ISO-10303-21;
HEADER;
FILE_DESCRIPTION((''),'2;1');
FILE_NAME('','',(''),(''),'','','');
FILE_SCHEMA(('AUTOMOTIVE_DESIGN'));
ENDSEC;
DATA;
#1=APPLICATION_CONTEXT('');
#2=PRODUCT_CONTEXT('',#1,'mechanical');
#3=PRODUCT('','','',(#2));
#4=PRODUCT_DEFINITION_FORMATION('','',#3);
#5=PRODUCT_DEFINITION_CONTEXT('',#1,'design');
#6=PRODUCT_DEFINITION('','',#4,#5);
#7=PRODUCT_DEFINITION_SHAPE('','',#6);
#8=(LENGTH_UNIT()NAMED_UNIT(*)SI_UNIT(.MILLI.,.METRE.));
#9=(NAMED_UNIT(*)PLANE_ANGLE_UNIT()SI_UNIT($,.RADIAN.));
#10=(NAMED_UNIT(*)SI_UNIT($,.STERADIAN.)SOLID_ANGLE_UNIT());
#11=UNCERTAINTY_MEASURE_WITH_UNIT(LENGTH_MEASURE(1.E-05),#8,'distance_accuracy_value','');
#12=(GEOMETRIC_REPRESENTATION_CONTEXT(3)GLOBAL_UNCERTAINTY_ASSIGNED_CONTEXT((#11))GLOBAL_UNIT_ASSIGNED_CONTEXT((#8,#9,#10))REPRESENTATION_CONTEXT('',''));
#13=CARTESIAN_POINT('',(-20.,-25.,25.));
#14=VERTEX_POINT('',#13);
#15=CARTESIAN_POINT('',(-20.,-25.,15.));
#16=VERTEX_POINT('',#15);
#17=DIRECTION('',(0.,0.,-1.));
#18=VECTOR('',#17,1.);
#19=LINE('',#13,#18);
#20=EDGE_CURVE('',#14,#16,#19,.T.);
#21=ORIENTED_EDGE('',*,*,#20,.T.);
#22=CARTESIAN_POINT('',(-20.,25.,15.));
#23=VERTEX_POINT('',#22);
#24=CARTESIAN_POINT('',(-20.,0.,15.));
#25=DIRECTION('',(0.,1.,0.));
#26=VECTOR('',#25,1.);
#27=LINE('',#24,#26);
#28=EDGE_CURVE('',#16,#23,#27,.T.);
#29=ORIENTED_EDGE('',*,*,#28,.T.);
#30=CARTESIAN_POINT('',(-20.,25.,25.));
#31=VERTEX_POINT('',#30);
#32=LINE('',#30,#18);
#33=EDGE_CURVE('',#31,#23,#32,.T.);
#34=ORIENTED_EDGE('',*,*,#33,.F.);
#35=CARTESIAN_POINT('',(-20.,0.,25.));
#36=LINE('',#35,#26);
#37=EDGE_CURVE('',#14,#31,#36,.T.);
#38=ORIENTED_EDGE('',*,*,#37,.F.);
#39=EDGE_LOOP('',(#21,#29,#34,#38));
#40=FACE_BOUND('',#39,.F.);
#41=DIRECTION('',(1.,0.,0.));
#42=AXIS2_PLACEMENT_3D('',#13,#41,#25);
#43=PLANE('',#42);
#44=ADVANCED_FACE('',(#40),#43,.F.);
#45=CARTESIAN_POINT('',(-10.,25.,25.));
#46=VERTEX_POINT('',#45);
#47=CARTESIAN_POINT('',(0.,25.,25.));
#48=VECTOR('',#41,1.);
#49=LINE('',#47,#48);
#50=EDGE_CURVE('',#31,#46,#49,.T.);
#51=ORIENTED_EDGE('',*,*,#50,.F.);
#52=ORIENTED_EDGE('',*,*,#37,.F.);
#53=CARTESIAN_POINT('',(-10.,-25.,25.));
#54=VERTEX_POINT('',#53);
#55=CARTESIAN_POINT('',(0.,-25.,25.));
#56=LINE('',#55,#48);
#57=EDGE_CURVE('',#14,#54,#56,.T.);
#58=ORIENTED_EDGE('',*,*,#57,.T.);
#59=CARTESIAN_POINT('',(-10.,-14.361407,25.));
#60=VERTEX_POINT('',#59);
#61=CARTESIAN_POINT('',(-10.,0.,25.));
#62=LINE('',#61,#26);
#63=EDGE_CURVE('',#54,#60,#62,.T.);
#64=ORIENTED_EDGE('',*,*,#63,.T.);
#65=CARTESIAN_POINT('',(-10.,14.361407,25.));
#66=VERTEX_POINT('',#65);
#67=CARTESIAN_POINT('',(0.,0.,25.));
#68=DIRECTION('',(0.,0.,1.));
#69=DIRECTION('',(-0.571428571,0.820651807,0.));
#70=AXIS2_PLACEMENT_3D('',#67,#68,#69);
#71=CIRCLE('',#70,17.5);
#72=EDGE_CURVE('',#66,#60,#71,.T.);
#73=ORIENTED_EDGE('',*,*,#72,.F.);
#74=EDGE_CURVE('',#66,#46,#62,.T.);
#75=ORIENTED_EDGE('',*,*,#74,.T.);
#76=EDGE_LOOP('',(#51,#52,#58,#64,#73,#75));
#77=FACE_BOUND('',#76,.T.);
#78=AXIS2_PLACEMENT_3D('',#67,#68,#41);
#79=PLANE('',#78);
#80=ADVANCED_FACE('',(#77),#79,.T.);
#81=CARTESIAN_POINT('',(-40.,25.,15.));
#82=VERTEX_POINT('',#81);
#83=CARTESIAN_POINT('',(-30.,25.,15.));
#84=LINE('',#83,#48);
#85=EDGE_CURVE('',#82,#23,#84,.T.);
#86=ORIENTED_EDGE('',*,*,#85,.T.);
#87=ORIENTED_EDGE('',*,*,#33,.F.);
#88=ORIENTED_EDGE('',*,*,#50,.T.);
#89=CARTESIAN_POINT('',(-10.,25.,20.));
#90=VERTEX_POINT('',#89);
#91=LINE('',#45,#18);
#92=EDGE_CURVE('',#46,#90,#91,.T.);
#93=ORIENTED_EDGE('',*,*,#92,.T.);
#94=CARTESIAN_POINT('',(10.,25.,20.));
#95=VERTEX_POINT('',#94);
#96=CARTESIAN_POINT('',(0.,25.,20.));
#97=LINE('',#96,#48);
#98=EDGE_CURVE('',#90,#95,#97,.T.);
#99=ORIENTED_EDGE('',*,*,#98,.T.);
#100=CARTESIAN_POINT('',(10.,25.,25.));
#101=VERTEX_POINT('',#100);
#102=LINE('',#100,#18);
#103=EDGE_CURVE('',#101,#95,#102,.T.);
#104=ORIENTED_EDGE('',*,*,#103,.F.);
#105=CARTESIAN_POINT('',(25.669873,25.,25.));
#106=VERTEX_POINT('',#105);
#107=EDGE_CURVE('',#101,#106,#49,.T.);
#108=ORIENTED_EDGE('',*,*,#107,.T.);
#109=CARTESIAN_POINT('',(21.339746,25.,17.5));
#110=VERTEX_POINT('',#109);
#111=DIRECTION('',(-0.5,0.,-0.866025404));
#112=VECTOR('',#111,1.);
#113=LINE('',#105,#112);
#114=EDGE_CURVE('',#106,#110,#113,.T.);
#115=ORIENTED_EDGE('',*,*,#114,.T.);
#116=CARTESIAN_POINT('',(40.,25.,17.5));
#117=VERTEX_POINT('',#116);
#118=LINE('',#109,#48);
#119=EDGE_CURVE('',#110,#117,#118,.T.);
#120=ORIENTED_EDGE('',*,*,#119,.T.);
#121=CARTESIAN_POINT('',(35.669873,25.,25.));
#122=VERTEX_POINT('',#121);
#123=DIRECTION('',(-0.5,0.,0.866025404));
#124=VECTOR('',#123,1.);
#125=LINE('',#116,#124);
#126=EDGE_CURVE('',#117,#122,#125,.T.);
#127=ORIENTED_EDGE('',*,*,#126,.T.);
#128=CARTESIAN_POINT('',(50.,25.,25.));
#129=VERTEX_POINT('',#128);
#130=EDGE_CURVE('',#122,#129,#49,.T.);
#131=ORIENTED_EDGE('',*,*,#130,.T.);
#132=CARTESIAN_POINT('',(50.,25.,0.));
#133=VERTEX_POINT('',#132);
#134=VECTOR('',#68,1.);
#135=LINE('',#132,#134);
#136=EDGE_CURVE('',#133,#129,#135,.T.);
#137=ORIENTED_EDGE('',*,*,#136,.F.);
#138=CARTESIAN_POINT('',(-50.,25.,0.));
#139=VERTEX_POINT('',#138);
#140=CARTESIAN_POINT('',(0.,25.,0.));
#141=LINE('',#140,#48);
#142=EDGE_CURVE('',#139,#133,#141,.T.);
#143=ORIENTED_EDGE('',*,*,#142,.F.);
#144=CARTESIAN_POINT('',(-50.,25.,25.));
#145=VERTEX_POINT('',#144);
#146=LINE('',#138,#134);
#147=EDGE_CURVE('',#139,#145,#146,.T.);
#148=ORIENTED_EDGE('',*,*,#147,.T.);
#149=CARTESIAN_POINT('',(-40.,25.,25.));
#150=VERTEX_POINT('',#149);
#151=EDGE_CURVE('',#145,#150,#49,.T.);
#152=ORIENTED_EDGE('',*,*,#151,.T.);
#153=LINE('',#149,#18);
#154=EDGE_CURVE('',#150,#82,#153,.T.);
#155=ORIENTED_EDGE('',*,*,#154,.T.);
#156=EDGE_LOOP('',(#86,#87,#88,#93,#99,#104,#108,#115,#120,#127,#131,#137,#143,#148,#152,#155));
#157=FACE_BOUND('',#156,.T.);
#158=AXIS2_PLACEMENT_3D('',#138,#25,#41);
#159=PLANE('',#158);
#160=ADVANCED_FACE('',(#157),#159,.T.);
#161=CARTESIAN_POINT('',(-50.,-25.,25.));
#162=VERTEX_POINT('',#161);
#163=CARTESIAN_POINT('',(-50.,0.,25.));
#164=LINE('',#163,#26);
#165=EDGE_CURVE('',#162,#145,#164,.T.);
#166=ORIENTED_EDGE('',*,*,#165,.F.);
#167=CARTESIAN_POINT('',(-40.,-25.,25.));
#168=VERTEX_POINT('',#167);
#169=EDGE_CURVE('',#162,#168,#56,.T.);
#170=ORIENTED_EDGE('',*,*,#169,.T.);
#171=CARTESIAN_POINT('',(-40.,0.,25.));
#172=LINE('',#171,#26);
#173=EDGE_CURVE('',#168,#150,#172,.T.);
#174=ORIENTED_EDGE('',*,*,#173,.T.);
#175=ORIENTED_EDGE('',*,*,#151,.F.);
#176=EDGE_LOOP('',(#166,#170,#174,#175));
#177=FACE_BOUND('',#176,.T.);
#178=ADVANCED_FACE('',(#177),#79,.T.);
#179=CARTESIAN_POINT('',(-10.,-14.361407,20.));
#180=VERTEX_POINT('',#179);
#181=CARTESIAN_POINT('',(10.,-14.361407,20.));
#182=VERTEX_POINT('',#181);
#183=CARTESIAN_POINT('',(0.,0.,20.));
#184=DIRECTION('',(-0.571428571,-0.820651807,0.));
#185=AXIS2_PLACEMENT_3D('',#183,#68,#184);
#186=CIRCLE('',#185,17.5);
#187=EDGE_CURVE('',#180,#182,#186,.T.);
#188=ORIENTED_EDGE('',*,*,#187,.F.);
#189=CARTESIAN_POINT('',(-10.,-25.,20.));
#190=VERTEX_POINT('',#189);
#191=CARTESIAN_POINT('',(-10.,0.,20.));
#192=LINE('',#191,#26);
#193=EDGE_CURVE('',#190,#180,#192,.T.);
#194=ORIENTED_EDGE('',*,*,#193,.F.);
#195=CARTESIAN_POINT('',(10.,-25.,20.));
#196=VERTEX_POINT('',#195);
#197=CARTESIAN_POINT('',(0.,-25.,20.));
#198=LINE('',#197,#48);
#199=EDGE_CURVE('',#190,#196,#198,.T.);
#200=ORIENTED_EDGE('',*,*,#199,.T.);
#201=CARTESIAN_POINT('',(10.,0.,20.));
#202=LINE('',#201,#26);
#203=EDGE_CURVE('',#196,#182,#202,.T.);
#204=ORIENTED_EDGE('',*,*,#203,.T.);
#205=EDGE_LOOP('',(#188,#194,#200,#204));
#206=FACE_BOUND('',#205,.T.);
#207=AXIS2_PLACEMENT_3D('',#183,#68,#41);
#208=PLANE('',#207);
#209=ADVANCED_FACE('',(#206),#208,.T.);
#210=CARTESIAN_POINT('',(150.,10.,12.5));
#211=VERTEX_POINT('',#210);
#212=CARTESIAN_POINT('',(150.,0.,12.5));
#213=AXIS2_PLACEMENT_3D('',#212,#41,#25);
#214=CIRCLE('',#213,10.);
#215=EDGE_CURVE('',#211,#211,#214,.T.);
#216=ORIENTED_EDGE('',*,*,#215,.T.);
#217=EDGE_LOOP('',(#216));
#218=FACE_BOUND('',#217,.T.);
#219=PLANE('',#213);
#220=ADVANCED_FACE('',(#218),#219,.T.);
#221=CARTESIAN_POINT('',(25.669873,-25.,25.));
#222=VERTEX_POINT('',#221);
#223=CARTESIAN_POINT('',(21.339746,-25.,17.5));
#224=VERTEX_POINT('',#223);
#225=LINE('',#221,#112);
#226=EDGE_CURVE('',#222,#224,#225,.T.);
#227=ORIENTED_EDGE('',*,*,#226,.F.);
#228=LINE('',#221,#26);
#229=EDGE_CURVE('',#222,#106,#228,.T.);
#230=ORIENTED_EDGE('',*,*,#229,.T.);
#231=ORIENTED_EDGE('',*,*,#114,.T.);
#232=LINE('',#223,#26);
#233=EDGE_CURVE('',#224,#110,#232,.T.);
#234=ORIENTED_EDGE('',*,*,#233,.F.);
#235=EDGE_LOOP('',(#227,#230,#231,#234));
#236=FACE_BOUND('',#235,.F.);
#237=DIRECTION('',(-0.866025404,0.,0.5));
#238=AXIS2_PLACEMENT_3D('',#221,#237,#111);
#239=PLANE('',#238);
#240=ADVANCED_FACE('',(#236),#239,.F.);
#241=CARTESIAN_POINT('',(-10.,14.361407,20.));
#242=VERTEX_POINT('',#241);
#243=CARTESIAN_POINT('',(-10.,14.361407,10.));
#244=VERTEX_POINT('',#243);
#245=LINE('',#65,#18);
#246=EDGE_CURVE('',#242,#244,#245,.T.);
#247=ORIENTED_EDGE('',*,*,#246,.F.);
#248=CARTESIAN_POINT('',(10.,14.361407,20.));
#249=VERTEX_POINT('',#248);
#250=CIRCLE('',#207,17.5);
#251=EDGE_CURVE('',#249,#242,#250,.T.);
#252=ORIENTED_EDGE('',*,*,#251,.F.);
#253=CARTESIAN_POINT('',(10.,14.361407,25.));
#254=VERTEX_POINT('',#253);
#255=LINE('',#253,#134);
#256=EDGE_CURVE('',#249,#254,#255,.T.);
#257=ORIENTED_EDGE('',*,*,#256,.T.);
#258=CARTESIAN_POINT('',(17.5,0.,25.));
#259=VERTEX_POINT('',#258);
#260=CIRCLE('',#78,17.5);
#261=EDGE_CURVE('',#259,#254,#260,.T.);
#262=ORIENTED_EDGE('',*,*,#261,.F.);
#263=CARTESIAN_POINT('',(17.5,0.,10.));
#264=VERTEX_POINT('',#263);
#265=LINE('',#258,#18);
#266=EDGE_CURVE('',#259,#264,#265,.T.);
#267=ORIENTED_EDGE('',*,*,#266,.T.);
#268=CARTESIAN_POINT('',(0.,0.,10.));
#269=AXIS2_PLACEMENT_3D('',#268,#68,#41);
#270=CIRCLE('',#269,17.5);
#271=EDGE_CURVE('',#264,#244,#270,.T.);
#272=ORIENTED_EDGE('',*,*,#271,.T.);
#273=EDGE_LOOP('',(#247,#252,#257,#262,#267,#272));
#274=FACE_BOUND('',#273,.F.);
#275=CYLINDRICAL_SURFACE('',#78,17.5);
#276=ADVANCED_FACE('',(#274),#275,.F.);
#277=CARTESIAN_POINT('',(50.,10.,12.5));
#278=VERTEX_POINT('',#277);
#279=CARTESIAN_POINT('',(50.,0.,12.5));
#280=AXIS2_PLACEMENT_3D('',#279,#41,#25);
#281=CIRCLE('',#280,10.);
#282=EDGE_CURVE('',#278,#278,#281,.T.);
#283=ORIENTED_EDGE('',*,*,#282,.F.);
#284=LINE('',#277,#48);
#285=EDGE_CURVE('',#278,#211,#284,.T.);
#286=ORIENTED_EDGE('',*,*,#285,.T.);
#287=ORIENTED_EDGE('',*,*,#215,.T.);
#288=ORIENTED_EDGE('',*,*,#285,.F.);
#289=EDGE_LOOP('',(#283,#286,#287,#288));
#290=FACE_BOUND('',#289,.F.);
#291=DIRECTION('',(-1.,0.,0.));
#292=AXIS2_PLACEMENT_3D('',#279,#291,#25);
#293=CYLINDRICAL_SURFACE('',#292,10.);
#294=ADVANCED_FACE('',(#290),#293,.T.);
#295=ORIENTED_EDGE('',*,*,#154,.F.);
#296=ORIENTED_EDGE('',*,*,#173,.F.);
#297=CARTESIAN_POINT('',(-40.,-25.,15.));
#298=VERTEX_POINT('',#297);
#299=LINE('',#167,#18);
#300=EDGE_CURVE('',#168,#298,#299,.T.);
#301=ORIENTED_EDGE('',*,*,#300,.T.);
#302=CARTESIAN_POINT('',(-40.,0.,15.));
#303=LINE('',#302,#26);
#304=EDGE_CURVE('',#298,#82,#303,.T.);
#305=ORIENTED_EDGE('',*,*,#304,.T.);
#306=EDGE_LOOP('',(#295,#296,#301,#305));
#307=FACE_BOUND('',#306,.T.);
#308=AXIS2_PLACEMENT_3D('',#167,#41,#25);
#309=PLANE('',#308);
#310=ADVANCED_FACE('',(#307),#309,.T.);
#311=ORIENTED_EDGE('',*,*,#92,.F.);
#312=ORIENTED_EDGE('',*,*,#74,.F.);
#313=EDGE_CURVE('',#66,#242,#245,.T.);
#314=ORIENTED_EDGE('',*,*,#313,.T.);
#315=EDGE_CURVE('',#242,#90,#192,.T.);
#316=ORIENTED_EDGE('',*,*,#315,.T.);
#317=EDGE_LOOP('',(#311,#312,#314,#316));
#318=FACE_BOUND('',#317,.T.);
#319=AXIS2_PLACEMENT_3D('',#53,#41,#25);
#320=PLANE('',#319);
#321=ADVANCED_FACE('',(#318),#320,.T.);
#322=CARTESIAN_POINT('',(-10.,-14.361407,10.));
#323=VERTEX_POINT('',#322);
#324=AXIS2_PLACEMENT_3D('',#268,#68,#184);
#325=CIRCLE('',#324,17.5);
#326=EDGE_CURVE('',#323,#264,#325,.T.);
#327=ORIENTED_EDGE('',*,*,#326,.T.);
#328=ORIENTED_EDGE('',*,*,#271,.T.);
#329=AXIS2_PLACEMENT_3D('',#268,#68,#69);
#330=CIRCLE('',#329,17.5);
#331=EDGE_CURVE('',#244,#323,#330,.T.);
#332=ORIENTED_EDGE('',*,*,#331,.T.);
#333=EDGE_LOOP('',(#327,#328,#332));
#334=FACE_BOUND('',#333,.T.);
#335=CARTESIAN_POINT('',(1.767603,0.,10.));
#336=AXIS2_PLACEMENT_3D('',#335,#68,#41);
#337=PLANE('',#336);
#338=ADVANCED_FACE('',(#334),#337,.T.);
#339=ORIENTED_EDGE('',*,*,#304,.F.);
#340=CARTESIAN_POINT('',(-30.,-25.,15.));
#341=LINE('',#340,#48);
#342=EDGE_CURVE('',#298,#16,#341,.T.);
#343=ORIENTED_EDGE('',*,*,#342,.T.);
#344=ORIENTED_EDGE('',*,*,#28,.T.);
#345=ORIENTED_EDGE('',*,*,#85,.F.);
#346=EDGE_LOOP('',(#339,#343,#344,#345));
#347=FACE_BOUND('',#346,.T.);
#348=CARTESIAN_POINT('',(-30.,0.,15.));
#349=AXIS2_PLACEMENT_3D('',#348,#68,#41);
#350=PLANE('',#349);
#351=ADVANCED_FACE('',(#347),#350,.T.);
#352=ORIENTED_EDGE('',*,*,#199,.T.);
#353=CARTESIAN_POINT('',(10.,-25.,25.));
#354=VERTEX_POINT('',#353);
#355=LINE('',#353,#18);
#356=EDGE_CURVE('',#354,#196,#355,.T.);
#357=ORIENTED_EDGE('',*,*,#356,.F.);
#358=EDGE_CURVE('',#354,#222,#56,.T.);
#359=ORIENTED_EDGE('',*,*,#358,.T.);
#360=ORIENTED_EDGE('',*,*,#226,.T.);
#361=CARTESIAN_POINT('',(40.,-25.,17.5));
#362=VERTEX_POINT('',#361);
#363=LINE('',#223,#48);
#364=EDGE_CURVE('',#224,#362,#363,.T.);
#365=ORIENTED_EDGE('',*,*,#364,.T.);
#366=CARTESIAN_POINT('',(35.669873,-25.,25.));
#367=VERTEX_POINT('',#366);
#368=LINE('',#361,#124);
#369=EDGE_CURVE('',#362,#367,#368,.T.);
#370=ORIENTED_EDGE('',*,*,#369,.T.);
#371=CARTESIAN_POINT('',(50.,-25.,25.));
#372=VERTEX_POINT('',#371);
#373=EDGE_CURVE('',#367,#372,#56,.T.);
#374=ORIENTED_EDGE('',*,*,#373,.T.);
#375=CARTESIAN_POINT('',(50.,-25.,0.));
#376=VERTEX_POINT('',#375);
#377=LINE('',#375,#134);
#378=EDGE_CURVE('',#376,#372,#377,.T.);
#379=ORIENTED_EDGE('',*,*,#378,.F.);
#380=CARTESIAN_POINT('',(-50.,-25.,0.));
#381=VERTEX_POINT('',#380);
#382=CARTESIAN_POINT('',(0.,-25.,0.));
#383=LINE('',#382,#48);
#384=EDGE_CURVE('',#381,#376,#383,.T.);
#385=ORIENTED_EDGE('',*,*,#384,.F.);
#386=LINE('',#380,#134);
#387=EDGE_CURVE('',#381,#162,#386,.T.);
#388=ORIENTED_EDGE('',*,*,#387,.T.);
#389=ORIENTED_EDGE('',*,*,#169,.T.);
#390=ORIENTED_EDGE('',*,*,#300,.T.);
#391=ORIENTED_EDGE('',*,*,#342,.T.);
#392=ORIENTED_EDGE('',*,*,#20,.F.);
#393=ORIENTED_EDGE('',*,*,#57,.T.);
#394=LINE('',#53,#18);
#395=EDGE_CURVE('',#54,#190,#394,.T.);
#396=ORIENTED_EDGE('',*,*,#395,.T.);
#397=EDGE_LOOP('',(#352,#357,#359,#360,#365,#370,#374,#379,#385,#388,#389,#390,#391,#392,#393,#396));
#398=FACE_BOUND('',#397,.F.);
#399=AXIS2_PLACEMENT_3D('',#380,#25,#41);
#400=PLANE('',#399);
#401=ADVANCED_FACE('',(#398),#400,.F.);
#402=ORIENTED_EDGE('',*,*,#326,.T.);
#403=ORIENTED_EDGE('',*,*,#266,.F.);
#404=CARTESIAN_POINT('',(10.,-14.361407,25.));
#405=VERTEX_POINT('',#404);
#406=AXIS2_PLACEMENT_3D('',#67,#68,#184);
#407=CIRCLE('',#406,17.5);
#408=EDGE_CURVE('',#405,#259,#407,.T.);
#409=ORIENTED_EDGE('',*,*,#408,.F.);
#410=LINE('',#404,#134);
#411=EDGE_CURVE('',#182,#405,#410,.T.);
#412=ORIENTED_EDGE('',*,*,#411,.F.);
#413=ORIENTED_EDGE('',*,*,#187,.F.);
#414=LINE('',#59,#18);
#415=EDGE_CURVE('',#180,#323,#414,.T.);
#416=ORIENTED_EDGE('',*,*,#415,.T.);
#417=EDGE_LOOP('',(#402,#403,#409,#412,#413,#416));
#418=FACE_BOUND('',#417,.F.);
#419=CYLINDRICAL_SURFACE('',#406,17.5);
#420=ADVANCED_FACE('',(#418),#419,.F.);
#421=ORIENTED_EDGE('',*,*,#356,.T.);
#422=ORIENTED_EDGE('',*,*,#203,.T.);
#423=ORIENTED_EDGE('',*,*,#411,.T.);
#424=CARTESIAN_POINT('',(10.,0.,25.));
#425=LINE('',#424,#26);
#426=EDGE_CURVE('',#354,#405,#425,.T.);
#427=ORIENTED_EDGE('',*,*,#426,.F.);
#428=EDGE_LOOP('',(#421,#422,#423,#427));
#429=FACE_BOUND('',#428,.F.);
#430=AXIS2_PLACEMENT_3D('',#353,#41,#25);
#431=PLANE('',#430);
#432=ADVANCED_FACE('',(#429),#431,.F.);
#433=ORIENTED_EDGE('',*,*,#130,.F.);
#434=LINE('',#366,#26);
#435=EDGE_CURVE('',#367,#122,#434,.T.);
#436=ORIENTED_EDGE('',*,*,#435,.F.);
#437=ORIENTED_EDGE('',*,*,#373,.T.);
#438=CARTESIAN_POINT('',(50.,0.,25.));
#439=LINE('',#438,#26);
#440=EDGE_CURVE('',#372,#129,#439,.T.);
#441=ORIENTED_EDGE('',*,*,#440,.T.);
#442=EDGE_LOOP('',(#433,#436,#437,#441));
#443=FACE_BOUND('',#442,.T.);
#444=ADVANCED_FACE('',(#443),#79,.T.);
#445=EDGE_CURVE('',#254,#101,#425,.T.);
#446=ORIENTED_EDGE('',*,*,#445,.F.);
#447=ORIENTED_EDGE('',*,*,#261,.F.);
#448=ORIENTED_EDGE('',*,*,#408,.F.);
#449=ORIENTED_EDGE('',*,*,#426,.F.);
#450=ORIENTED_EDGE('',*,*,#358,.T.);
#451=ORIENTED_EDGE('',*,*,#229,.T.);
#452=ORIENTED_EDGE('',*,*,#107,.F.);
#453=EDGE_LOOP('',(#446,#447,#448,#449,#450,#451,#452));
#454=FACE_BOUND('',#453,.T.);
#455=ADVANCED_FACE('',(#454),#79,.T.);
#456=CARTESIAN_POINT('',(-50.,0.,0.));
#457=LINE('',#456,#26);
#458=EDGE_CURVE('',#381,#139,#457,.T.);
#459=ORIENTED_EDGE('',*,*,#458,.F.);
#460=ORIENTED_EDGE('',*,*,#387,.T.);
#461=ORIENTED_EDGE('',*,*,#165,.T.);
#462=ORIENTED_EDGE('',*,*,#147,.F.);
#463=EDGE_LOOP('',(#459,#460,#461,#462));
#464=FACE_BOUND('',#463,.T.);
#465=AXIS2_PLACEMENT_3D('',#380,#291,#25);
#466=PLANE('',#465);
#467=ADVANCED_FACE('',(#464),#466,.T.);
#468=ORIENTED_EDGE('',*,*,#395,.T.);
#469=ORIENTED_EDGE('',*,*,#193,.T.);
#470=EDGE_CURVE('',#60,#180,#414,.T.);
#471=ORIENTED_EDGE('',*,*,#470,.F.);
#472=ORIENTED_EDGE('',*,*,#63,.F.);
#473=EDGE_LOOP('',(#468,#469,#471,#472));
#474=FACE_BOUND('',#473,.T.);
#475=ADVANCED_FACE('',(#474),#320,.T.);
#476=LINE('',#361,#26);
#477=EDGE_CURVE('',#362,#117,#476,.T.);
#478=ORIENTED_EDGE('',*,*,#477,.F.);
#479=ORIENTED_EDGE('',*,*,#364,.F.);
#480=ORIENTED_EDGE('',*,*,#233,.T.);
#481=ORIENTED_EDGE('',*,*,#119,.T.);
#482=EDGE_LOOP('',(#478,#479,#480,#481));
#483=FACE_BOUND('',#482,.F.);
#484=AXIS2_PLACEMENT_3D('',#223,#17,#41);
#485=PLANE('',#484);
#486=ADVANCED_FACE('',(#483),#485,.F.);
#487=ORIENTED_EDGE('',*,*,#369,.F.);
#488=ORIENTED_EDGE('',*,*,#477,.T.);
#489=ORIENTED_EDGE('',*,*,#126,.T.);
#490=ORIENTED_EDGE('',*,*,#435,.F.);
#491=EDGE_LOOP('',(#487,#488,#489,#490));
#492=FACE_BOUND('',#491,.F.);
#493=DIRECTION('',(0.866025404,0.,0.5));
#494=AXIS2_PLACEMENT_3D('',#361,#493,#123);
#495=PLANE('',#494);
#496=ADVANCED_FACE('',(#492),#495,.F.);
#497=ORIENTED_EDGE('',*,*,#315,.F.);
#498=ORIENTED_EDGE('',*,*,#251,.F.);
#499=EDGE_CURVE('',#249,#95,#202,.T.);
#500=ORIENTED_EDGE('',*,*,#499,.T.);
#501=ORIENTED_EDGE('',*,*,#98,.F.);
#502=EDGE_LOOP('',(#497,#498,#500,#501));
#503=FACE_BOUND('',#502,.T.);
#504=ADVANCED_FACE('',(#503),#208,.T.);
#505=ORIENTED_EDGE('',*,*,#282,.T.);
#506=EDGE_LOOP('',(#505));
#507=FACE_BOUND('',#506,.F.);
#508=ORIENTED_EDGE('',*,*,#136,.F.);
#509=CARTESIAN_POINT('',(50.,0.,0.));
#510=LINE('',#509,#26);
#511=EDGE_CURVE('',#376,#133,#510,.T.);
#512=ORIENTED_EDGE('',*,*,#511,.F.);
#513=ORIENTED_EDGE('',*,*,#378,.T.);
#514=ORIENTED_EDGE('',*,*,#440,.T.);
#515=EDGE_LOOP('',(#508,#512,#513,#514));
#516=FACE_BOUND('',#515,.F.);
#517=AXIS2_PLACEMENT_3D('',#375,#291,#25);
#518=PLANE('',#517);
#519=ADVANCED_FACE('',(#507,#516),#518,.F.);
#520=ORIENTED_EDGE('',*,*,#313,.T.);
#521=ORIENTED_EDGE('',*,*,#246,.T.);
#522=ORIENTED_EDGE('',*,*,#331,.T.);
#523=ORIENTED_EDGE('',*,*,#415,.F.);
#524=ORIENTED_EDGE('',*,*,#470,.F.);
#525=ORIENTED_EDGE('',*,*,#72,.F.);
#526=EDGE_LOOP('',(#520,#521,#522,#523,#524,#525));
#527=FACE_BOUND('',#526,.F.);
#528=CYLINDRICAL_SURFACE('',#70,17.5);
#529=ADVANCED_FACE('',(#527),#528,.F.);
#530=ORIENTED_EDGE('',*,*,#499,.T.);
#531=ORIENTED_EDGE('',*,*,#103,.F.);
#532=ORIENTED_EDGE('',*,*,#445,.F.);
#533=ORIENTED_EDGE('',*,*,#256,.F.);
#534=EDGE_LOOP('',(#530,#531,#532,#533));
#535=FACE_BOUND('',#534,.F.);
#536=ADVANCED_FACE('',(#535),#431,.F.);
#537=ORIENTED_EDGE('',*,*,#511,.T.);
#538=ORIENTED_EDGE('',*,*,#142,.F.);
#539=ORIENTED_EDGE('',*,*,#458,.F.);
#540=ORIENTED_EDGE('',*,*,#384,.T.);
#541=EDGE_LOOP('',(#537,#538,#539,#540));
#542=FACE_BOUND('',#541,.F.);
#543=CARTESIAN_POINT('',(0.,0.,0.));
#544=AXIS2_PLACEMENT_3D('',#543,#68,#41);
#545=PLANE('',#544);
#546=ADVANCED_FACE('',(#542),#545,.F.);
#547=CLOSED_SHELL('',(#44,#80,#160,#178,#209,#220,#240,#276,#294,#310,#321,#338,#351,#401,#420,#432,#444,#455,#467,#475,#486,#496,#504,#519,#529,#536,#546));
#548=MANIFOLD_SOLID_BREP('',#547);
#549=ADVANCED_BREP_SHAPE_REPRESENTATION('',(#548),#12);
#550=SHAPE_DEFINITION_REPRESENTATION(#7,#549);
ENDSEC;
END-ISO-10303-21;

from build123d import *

# Parameters (mm, degrees)
F0_W      = 100
F0_H      = 50
F1_DEPTH  = 25
F2_W      = 20
F2_H      = 50
F3_DEPTH  = 10
F4_DEPTH  = 5
F6_DEPTH  = 50
F7_R      = 10
F8_DEPTH  = 100
F10_DEPTH = 15


# Not quite as in the source:
# - a feature names something its author has since deleted; it is built from what else it names


with BuildPart() as f1:
    # F0 (on Top) → F1 (new body)
    with BuildSketch(Plane.XY):
        Rectangle(F0_W, F0_H)
    extrude(amount=F1_DEPTH)

    # F2 (on face) → F3 (cut)
    with BuildSketch(Plane.XY.offset(25)):
        with Locations((-30, 0)):
            Rectangle(F2_W, F2_H)
    extrude(amount=-F3_DEPTH, mode=Mode.SUBTRACT)

    # F2 (on face) → F4 (cut)
    with BuildSketch(Plane.XY.offset(25)):
        Rectangle(F2_W, F2_H)
    extrude(amount=-F4_DEPTH, mode=Mode.SUBTRACT)

    # F5 (on face) → F6 (cut, through all)
    with BuildSketch(Plane.XZ.offset(25)):
        Polygon((35.6698729811, 25), (25.6698729811, 25), (21.3397459622, 17.5), (40, 17.5), align=None)
    extrude(amount=-F6_DEPTH, mode=Mode.SUBTRACT)

    # F7 (on face) → F8 (join)
    with BuildSketch(Plane.YZ.offset(50)):
        with Locations((0, 12.5)):
            Circle(F7_R)
    extrude(amount=F8_DEPTH)

    # F9 (on face) → F10 (cut)
    with BuildSketch(Plane.XY.offset(25)):
        with BuildLine():
            ThreePointArc((-10, -14.3614066163), (8.100925873, -15.5120920575), (17.5, 0))
            ThreePointArc((17.5, 0), (8.100925873, 15.5120920575), (-10, 14.3614066163))
            Line((-10, 14.3614066163), (-10, -14.3614066163))
        make_face()
        with BuildLine():
            Line((-10, -14.3614066163), (-10, 14.3614066163))
            ThreePointArc((-10, 14.3614066163), (-17.5, 0), (-10, -14.3614066163))
        make_face()
    extrude(amount=-F10_DEPTH, mode=Mode.SUBTRACT)


solid = f1.part
